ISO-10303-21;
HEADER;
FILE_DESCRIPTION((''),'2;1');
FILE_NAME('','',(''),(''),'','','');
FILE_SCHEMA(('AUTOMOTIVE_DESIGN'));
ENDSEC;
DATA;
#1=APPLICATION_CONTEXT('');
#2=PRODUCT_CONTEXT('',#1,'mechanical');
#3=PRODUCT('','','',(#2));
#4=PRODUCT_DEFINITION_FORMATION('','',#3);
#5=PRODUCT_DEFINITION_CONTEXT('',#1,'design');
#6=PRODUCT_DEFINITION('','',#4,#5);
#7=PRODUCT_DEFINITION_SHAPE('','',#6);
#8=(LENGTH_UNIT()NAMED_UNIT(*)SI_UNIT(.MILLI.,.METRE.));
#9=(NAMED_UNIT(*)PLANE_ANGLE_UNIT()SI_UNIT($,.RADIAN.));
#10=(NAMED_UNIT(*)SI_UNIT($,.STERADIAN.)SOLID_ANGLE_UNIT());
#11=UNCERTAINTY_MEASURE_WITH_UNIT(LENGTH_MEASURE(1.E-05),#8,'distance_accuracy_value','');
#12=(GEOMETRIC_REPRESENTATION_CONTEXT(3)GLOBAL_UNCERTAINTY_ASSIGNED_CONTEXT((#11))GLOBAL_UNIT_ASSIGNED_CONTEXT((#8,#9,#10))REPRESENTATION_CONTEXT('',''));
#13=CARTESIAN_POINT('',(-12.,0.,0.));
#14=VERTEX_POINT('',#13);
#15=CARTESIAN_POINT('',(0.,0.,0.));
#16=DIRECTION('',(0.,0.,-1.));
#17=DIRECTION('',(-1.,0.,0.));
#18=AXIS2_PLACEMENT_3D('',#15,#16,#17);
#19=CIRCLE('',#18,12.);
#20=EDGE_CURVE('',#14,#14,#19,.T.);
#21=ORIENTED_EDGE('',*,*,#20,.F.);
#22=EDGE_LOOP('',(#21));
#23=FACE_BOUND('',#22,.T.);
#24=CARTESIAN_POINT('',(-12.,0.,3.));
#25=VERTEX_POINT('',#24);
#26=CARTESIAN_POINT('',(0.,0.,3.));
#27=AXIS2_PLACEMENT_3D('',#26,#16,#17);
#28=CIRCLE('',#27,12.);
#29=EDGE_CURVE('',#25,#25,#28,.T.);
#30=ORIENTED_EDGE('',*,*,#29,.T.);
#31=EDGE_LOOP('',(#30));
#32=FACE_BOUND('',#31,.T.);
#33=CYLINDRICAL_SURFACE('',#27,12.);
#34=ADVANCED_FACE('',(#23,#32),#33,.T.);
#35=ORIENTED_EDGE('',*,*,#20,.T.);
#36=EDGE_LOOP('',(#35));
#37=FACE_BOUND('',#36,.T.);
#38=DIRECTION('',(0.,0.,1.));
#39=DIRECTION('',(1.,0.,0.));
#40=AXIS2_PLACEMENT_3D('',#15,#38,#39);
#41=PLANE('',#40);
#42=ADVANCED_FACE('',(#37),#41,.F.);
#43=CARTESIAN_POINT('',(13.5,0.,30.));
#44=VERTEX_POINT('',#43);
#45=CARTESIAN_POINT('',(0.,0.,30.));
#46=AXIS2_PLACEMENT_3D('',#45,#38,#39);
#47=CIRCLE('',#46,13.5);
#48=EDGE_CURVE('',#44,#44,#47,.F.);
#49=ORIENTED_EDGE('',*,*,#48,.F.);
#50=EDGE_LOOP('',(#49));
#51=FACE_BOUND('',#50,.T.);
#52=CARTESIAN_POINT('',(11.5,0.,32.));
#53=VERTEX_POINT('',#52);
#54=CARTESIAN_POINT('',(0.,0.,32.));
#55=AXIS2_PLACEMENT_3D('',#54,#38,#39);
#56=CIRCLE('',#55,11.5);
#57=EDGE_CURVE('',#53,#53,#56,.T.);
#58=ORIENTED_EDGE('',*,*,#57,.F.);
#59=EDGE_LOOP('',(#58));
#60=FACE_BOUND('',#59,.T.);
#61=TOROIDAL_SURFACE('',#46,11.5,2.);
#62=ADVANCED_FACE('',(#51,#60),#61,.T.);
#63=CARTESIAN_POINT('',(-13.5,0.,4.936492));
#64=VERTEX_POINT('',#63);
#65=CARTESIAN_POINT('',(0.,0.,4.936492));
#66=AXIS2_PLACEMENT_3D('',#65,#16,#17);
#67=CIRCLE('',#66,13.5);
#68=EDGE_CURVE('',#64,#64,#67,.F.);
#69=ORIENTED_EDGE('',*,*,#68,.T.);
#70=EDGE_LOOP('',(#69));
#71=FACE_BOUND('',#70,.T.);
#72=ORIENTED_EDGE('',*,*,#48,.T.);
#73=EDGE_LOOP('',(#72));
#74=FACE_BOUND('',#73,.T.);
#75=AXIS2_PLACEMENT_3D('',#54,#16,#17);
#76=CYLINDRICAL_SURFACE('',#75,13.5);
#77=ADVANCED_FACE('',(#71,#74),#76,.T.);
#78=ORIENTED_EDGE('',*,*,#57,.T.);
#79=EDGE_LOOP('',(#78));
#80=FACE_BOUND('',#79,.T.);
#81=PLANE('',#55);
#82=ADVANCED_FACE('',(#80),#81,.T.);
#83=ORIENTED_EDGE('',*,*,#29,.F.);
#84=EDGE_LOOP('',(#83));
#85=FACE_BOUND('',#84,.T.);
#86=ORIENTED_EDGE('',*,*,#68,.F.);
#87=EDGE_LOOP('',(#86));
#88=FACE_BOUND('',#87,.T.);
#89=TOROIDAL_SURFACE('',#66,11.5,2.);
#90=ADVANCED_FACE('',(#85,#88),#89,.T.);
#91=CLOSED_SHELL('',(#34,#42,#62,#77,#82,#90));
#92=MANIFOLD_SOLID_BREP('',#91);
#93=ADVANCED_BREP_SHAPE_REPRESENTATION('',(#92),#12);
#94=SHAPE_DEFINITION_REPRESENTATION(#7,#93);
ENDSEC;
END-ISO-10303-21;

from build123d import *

# Parameters (mm, degrees)
SKETCH1_R           = 13.5
BOSS_EXTRUDE1_DEPTH = 32
FILLET1_R           = 2
SKETCH2_R           = 14.634398313
SKETCH2_R_2         = 12
CUT_EXTRUDE1_DEPTH  = 3
FILLET2_R           = 2


with BuildPart() as part:
    # Sketch1 → Boss-Extrude1 (new body)
    with BuildSketch(Plane.XY):
        Circle(SKETCH1_R)
    extrude(amount=BOSS_EXTRUDE1_DEPTH)

    # Fillet1
    fillet1_edges = [part.edges().sort_by_distance(p)[0] for p in [
        (-13.5, 0, 32),
    ]]
    fillet(fillet1_edges, radius=FILLET1_R)

    # Sketch2 → Cut-Extrude1 (cut)
    with BuildSketch(Plane(origin=(0, 0, 0), x_dir=(-1, 0, 0), z_dir=(0, 0, -1))):
        Circle(SKETCH2_R)
        Circle(SKETCH2_R_2, mode=Mode.SUBTRACT)
    extrude(amount=-CUT_EXTRUDE1_DEPTH, mode=Mode.SUBTRACT)

    # Fillet2
    # the kernel refuses this fillet: 2 mm, written as the material it takes off along each edge
    with BuildSketch(Plane(origin=(0, 0, 3), x_dir=(1, 0, 0), z_dir=(0, 1, 0))) as fillet2_piece_1:
        with BuildLine():
            CenterArc((11.5, -1.936491673), FILLET2_R, 0, 75.522487814)
            Line((12, 0), (12.01, 0.038729833))
            ThreePointArc((12.01, 0.038729833), (12.75, 0.04), (13.5, 0.04))
            Line((13.5, 0.04), (13.54, 0))
            Line((13.54, 0), (13.54, -1.936491673))
            Line((13.54, -1.936491673), (13.5, -1.936491673))
        make_face()
    revolve(axis=Axis((0, 0, 3), (0, 0, -1)), mode=Mode.SUBTRACT)


solid = part.part
